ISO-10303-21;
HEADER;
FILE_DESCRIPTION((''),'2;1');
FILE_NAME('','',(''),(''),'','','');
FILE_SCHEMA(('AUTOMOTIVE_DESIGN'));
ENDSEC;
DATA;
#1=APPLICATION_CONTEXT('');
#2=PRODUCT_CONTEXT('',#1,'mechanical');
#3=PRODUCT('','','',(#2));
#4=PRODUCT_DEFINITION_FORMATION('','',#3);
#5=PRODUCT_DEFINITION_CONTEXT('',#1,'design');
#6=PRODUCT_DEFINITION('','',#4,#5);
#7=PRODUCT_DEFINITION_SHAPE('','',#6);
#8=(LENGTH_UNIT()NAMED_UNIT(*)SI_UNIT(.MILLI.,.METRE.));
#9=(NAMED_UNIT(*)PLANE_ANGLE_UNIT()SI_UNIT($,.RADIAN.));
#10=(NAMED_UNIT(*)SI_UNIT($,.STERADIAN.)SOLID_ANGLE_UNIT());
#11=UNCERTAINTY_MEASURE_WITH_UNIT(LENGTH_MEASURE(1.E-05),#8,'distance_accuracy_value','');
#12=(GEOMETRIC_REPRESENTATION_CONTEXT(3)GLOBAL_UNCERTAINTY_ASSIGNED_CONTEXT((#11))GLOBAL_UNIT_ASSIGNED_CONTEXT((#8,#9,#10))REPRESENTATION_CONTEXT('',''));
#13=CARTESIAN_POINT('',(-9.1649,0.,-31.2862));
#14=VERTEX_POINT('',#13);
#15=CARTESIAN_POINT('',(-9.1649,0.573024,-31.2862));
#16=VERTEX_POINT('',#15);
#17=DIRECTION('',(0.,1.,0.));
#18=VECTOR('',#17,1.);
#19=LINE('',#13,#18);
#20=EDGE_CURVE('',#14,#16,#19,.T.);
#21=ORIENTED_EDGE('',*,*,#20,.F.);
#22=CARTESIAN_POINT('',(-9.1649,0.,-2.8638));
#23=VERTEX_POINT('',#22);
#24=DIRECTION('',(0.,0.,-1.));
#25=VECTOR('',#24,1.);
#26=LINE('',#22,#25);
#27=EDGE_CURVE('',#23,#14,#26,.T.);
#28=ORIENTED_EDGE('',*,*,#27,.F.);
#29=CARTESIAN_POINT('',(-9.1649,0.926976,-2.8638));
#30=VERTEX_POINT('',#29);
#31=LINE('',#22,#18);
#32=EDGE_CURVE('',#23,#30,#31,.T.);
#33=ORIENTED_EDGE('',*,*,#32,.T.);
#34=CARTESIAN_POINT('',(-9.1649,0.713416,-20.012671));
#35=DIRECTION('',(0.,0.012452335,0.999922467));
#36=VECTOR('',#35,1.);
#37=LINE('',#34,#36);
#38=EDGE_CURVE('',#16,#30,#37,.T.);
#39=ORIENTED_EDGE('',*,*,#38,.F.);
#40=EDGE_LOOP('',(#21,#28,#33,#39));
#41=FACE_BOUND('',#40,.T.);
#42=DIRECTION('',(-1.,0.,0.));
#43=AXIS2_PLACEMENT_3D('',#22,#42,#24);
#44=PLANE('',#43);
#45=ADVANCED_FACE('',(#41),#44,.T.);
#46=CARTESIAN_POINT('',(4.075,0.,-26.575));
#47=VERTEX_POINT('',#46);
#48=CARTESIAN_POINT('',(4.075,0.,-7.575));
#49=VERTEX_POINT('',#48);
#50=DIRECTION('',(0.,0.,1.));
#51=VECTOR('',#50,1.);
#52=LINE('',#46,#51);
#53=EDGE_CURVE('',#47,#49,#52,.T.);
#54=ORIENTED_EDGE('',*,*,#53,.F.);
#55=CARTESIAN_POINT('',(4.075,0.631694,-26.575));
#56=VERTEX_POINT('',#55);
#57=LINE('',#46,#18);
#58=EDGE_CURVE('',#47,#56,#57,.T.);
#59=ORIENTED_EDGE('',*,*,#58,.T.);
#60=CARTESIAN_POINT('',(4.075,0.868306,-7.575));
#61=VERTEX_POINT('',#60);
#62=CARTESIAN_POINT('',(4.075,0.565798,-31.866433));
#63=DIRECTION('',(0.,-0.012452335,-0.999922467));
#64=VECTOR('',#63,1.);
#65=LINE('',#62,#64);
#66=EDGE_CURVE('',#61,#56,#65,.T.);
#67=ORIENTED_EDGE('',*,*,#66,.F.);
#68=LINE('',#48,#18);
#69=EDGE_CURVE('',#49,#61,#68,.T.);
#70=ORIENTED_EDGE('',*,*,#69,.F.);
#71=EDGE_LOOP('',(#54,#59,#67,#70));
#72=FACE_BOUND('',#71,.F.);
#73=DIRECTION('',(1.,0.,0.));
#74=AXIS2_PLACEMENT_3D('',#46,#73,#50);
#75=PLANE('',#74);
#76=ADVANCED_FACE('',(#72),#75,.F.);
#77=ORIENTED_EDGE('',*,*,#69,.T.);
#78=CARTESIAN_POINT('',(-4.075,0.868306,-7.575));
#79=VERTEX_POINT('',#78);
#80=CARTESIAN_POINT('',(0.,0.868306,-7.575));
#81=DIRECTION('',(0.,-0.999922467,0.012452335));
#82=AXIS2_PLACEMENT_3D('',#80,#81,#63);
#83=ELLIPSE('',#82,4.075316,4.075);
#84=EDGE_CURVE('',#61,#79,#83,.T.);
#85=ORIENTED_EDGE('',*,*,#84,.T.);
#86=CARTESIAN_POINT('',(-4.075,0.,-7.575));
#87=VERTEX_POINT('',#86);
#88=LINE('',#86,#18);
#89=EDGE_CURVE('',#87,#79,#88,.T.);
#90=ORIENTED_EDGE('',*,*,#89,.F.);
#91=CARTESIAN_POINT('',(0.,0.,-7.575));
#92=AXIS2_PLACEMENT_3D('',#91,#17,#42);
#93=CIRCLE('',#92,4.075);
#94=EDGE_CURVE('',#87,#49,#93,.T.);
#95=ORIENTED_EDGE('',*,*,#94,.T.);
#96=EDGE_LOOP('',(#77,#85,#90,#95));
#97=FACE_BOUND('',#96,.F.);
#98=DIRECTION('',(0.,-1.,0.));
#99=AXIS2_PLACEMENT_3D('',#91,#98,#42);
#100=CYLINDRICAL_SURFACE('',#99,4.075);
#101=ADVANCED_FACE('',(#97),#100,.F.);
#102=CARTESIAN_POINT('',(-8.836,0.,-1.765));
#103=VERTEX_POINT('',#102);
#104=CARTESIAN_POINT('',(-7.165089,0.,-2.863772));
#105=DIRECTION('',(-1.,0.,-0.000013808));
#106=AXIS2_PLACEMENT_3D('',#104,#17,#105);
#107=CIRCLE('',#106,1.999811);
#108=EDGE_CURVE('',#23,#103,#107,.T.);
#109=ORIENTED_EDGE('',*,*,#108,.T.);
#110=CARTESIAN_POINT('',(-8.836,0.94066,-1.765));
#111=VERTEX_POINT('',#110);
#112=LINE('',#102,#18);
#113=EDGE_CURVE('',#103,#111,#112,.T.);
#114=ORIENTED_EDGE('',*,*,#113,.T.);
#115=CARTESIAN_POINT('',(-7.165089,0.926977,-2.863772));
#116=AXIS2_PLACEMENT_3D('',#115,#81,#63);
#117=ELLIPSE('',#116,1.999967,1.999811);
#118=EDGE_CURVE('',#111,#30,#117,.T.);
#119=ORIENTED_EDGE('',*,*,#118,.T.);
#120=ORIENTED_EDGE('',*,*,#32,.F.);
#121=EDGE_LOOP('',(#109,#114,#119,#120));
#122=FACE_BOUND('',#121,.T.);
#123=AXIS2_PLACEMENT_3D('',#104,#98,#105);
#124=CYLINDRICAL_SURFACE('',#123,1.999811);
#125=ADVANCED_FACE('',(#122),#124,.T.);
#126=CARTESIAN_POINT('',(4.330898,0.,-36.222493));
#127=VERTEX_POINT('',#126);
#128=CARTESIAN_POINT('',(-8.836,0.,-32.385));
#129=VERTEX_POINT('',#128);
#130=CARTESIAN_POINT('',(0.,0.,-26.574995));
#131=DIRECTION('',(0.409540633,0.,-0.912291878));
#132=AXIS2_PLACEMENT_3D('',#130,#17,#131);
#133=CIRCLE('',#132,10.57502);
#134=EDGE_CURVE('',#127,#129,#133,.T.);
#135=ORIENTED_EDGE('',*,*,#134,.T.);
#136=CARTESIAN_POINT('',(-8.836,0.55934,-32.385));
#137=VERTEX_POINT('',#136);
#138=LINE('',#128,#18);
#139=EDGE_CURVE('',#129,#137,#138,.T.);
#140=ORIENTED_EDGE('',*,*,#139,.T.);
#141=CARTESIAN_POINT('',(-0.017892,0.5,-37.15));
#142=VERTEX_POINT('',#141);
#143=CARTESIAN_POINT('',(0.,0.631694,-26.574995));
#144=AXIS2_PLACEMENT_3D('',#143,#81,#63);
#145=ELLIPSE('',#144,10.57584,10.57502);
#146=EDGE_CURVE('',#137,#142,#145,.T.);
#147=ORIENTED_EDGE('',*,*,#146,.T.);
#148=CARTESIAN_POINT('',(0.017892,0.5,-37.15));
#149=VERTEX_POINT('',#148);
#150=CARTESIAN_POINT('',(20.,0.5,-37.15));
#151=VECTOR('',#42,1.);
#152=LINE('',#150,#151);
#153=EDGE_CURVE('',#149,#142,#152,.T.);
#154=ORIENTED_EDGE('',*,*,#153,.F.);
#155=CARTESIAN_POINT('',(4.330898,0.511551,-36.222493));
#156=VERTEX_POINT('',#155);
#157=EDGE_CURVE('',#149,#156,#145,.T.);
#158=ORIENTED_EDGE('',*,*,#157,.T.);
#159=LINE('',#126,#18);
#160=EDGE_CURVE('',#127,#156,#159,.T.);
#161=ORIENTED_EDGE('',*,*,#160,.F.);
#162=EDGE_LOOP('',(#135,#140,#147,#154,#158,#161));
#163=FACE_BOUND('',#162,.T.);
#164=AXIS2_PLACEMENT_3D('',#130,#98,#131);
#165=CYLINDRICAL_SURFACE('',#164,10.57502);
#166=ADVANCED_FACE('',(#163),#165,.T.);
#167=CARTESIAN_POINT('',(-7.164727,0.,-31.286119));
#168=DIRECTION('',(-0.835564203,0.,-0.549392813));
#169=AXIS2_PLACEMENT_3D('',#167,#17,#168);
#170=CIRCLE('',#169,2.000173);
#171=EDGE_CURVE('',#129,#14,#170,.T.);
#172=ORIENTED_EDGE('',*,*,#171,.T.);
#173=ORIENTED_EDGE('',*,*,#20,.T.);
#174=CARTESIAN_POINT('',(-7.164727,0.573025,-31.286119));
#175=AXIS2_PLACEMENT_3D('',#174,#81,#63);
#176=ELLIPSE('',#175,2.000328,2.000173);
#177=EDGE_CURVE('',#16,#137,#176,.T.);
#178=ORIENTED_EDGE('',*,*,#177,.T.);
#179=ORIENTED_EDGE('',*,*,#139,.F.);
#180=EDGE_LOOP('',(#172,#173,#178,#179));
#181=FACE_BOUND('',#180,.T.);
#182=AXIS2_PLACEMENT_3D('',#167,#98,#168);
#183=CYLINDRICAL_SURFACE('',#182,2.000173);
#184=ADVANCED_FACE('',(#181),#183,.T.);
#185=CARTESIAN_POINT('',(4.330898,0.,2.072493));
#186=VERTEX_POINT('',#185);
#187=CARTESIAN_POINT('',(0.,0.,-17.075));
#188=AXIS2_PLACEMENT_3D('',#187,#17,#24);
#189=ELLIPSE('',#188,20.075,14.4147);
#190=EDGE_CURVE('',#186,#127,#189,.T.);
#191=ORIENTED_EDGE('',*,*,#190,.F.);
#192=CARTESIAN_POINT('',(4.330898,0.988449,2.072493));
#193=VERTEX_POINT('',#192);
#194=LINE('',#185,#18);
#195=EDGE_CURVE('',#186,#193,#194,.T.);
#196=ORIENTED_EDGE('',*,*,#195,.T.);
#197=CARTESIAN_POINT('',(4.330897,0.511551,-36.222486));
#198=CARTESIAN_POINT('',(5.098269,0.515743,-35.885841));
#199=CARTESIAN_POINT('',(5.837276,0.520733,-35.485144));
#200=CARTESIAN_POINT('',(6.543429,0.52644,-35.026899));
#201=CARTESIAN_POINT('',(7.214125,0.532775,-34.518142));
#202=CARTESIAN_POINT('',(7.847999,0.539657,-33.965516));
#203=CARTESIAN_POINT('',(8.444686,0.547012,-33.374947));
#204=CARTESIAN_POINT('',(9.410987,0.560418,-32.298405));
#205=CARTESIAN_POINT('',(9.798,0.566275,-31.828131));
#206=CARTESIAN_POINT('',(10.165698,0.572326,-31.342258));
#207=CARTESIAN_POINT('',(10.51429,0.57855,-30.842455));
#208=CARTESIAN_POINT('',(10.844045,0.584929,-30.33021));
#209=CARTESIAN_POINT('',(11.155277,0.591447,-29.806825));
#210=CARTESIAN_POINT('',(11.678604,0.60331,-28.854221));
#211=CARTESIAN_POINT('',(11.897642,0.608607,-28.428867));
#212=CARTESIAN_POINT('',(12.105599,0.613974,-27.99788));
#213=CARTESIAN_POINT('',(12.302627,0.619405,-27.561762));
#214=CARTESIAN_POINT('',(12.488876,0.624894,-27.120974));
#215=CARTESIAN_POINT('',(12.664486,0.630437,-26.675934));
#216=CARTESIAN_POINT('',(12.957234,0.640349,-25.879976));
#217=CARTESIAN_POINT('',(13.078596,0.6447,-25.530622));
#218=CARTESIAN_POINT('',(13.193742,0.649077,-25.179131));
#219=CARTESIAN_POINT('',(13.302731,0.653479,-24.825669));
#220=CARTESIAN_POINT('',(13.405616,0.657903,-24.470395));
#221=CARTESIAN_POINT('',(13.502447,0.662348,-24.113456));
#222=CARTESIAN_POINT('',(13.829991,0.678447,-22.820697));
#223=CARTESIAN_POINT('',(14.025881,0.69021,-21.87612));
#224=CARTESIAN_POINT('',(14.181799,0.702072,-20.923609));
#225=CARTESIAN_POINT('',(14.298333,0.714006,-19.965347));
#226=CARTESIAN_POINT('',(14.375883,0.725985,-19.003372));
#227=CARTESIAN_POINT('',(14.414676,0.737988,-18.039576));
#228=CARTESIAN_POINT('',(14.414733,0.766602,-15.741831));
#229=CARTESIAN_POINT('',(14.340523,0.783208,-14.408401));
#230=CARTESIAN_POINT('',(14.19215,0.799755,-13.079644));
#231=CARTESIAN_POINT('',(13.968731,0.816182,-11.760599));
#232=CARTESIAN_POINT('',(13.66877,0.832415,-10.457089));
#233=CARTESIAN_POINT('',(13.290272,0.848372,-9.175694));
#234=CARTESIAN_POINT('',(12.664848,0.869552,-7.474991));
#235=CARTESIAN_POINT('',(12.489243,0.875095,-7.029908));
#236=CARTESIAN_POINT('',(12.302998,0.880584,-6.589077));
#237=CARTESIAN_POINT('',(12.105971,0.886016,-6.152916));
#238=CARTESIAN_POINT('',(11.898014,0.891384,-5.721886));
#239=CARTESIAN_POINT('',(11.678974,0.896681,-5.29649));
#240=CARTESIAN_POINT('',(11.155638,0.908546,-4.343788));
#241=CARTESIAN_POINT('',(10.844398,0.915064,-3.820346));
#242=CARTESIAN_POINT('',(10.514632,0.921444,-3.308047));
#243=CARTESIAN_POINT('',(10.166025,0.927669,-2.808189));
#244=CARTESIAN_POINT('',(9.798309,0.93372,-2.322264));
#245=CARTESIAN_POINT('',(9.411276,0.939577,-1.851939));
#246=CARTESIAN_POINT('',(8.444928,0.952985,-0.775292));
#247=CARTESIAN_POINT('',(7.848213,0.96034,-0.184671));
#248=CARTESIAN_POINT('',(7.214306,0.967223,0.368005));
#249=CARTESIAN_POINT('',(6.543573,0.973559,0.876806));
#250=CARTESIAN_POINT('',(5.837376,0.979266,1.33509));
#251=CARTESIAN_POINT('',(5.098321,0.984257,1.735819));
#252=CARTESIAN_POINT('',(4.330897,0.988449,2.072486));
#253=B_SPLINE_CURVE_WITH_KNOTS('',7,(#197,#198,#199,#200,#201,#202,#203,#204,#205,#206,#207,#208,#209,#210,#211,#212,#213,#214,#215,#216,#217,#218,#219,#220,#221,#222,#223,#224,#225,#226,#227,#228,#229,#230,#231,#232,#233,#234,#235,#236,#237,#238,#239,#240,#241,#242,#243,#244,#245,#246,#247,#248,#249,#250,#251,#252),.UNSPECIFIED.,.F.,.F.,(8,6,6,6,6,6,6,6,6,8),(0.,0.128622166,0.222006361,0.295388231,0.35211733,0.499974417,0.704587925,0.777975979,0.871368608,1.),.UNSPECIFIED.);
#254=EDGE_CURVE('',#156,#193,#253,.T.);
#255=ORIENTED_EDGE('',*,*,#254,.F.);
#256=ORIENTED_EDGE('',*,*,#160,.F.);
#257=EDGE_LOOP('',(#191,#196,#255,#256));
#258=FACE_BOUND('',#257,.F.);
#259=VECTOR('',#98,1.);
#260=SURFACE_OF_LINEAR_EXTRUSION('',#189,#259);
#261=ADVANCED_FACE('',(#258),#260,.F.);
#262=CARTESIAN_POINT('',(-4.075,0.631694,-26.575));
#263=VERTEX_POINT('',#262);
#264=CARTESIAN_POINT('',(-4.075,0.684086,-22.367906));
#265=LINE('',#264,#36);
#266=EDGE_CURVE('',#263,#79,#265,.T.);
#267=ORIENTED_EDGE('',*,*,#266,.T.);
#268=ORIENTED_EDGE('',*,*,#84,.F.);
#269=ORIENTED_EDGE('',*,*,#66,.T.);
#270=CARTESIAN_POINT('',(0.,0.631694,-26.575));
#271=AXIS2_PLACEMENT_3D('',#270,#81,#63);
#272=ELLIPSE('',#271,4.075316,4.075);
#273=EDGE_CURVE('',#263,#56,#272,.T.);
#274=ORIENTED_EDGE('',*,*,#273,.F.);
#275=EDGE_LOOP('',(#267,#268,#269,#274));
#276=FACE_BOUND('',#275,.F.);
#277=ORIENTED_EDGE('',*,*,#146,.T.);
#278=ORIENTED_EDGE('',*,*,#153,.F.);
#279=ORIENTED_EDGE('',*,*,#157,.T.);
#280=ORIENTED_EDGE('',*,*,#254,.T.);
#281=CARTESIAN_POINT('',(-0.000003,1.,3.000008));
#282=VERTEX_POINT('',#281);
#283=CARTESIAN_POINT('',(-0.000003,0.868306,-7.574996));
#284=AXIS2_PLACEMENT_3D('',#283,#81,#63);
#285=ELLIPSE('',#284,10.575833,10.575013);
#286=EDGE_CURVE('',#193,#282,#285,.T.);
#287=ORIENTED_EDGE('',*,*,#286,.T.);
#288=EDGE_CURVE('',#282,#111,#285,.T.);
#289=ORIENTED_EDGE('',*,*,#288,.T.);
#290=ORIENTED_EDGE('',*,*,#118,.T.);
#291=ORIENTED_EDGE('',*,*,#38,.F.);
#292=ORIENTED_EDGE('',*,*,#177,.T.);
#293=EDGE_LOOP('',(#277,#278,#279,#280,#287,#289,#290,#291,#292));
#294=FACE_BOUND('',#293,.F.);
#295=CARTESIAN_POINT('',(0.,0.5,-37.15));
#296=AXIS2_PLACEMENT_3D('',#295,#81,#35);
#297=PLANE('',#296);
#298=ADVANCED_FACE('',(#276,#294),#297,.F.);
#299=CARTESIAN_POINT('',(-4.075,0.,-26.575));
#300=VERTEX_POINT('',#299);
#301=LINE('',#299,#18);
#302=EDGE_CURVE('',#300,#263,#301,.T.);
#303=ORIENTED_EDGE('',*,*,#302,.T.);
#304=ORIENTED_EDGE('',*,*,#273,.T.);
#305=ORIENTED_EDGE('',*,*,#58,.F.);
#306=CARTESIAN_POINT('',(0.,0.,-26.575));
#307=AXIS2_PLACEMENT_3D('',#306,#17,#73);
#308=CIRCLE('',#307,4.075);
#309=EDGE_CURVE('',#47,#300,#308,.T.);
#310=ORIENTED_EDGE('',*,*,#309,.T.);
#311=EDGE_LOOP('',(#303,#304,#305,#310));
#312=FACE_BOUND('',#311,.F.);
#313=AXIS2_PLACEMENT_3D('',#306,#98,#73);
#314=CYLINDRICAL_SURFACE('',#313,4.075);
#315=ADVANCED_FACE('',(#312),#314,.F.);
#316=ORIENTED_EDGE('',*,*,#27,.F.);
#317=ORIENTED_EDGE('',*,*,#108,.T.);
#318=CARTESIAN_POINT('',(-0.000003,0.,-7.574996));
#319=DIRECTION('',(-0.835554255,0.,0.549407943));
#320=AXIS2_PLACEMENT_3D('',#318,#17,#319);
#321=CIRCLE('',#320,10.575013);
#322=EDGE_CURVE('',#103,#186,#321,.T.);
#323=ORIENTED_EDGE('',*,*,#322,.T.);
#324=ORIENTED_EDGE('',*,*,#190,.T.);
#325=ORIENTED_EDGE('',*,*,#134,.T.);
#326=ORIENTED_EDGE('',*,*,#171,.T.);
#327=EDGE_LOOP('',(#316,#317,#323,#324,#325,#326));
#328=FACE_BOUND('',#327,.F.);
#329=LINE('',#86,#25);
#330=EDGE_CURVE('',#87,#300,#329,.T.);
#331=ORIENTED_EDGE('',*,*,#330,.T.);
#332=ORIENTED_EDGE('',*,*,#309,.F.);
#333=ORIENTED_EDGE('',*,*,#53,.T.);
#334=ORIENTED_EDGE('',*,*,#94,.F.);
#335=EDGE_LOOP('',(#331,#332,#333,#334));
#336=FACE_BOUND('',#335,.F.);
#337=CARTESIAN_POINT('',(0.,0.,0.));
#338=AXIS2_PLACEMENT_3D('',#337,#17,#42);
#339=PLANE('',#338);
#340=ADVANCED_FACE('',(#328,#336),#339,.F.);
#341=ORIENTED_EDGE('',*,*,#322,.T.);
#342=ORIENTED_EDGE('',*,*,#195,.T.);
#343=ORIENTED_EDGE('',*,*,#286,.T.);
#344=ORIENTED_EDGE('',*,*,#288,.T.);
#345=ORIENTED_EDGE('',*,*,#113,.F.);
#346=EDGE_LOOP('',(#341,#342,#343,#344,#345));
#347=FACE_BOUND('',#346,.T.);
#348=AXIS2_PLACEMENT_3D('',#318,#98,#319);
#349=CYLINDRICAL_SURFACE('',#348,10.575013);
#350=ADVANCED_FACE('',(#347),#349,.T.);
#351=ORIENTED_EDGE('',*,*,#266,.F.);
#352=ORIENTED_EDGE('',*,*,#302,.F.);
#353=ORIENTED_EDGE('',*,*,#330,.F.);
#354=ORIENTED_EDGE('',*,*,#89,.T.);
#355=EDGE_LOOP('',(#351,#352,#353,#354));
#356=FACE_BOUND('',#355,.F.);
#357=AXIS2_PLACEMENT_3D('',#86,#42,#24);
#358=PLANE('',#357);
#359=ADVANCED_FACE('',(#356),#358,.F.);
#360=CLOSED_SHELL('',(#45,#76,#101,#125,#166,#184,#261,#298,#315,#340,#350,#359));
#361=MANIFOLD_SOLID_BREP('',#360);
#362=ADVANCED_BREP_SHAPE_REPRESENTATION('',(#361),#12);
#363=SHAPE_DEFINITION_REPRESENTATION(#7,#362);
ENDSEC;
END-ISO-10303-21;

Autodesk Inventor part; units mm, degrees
ref_plane "YZ Plane" through (0, 0, 0) normal (1, 0, 0) x (0, 1, 0)
ref_plane "XZ Plane" through (0, 0, 0) normal (0, 1, 0) x (-1, 0, 0)
ref_plane "XY Plane" through (0, 0, 0) normal (0, 0, 1) x (1, 0, 0)
sketch "Sketch1" plane through (0, 0, 0) normal (0, 1, 0) x (-1, 0, 0)
  line L0 (0, 0) -> (0, -34.15) construction
  arc A0 (6.6649, -3.975) -> (-7.575, -7.575) centre (0, -7.575) ccw construction
  arc A1 (-7.575, -26.575) -> (6.6649, -30.175) centre (0, -26.575) ccw construction
  line L1 (4.075, -7.575) -> (4.075, -26.575) construction
  arc A2 (-4.075, -26.575) -> (4.075, -26.575) centre (0, -26.575) ccw construction
  line L2 (-4.075, -26.575) -> (-4.075, -7.575) construction
  arc A3 (4.075, -7.575) -> (-4.075, -7.575) centre (0, -7.575) ccw construction
  line L3 (9.1649, -3.975) -> (9.1649, -30.175) construction
  line L4 (9.1649, -3.975) -> (6.6649, -3.975) construction
  line L5 (9.1649, -30.175) -> (6.6649, -30.175) construction
  line L6 (-10.575, -14.075) -> (-10.575, -20.075) construction
  line L7 (0, -17.075) -> (-19.3792, -17.075) construction
  line L8 (-4.075, -20.075) -> (-4.075, -24.075) construction
  line L9 (-10.575, -20.075) -> (-7.575, -21.8932) construction
  line L10 (-10.575, -14.075) -> (-7.575, -12.2568) construction
  line L11 (-7.575, -7.575) -> (-7.575, -12.2568) construction
  line L12 (-7.575, -21.8932) -> (-7.575, -26.575) construction
  line L13 (-10.575, -17.075) -> (-16.875, -17.075) construction
  line L14 (-10.575, -14.075) -> (-14.875, -14.075) construction
  line L15 (-16.875, -16.075) -> (-16.875, -18.075) construction
  line L16 (-14.875, -20.075) -> (-10.575, -20.075) construction
  arc A4 (-14.875, -14.075) -> (-16.875, -16.075) centre (-14.875, -16.075) ccw construction
  arc A5 (-16.875, -18.075) -> (-14.875, -20.075) centre (-14.875, -18.075) ccw construction
  line L17 (-6.7059, -17.075) -> (-6.7059, -23.075) construction
  line L18 (-6.7059, -17.075) -> (-6.7059, -11.075) construction
  line L19 (-7.575, -11.075) -> (-14.875, -11.075) construction
  line L20 (-16.875, -13.075) -> (-16.875, -21.075) construction
  line L21 (-14.875, -23.075) -> (-7.575, -23.075) construction
  arc A6 (-14.875, -11.075) -> (-16.875, -13.075) centre (-14.875, -13.075) ccw construction
  arc A7 (-16.875, -21.075) -> (-14.875, -23.075) centre (-14.875, -21.075) ccw construction
  line L22 (19.3047, -16.075) -> (19.3047, -18.075) construction
  line L23 (17.3047, -14.075) -> (13.3047, -14.075) construction
  line L24 (17.3047, -20.075) -> (13.3047, -20.075) construction
  line L25 (9.1649, -16.075) -> (9.1649, -22.575) construction
  line L26 (9.1649, -17.075) -> (9.1649, -11.575) construction
  line L27 (9.1649, -11.575) -> (13.3047, -14.075) construction
  line L28 (9.1649, -22.575) -> (13.3047, -20.075) construction
  arc A8 (19.3047, -16.075) -> (17.3047, -14.075) centre (17.3047, -16.075) ccw construction
  arc A9 (17.3047, -20.075) -> (19.3047, -18.075) centre (17.3047, -18.075) ccw construction
  line L29 (9.1649, -30.175) -> (9.1649, -26.175) construction
  line L30 (9.1649, -3.975) -> (9.1649, -7.975) construction
  line L31 (9.1649, -24.9114) -> (13.8618, -22.075) construction
  line L32 (13.8618, -22.075) -> (17.3047, -22.075) construction
  arc A10 (17.3047, -22.075) -> (21.3047, -18.075) centre (17.3047, -18.075) ccw construction
  line L33 (21.3047, -18.075) -> (21.3047, -16.075) construction
  arc A11 (21.3047, -16.075) -> (17.3047, -12.075) centre (17.3047, -16.075) ccw construction
  line L34 (17.3047, -12.075) -> (13.8618, -12.075) construction
  line L35 (13.8618, -12.075) -> (9.1649, -9.2386) construction
  point P0 (7.575, -17.075)
  point P1 (-4.075, -10.075)
  point P2 (19.3047, -14.075)
  point P3 (19.3047, -20.075)
  dimension "d0" = 34.15
  dimension "d1" = 15.15
  dimension "d5" = 6
  dimension "d7" = 4
  dimension "d8" = 2.5
  dimension "d9" = 3.5
  dimension "d10" = 8.15
  dimension "d12" = 2
  dimension "d14" = 6
  dimension "d15" = 6
  dimension "d16" = 2
  dimension "d18" = 6
  dimension "d19" = 6
  dimension "d20" = 5.5
  dimension "d21" = 5.5
  dimension "d23" = 4
  dimension "d24" = 4
  dimension "d25" = 2
sketch "Sketch3" plane through (0, 0, 0) normal (0, 1, 0) x (-1, 0, 0)
  arc A0 (6.6649, -3.975) -> (-7.575, -7.575) centre (0, -7.575) ccw construction
  arc A1 (-7.575, -26.575) -> (6.6649, -30.175) centre (0, -26.575) ccw construction
  arc A2 (-4.075, -26.575) -> (4.075, -26.575) centre (0, -26.575) ccw projected
  line L0 (4.075, -7.575) -> (4.075, -26.575) projected
  arc A3 (4.075, -7.575) -> (-4.075, -7.575) centre (0, -7.575) ccw projected
  line L1 (-4.075, -26.575) -> (-4.075, -7.575) projected
  line L2 (9.1649, -3.975) -> (9.1649, -30.175) construction
  line L3 (-10.575, -14.075) -> (-10.575, -20.075) construction
  line L4 (-16.875, -16.075) -> (-16.875, -18.075) construction
  arc A4 (8.836, -1.765) -> (-4.3309, 2.0725) centre (0, -7.575) ccw
  arc A5 (-4.3309, -36.2225) -> (8.836, -32.385) centre (0, -26.575) ccw
  line L5 (9.1649, -2.8638) -> (9.1649, -31.2862)
  arc A6 (9.1649, -2.8638) -> (8.836, -1.765) centre (7.1649, -2.8638) ccw
  arc A7 (8.836, -32.385) -> (9.1649, -31.2862) centre (7.1649, -31.2862) ccw
  line L6 (-12.075, -10.8843) -> (-12.075, -24.6972)
  ellipse E0 centre (0, -17.075) end of major axis (0, -37.15) minor radius 14.4147 (-4.3309, 2.0725) -> (-4.3309, -36.2225) ccw
  point P0 (0, 0)
  point P1 (9.1649, -2.2991)
  point P2 (9.1649, -31.8509)
  dimension "d26" = 3
  dimension "d27" = 3
  dimension "d28" = 2
  dimension "d29" = 6.5
  dimension "d30" = 8
extrude "Extrusion1" add sketch "Sketch3" along normal blind 1
ref_plane "Work Plane1" through (0, 1, 3) normal (1, 0, 0) x (0, 0, -1)
sketch "Sketch7" plane through (0, 1, 3) normal (1, 0, 0) x (0, 0, -1)
  line L0 (40.15, 0) -> (40.15, -1) projected
  line L1 (40.15, -1) -> (33.65, -1) projected
  line L2 (33.65, -1) -> (33.65, 0) projected
  line L3 (33.65, 0) -> (40.15, 0) projected
  line L4 (0, -1) -> (0, 0) projected
  line L5 (0, 0) -> (6.5, 0) projected
  line L6 (6.5, 0) -> (6.5, -1) projected
  line L7 (6.5, -1) -> (0, -1) projected
  line L8 (40.15, -1) -> (35.385, -1) construction
  line L9 (40.15, -1) -> (40.15, -0.5) construction
  line L10 (40.15, -1) -> (40.15, 0) construction
  line L11 (4.765, 0) -> (0, 0) construction
  line L12 (40.15, -0.5) -> (0, 0)
  line L13 (0, 0) -> (40.15, 0)
  line L14 (40.15, 0) -> (40.15, -0.5)
  point P0 (3, -1)
  point P1 (39.2225, -1)
  point P2 (0.9275, 0)
extrude "Extrusion2" cut sketch "Sketch7" along normal blind 20 and the other way blind 20 contours L0 L12 L2 L3 | L2 L12 L6 L13 | L6 L12 L5
properties part number "SPD_MTB_cleat_new_1mm_05mm"
